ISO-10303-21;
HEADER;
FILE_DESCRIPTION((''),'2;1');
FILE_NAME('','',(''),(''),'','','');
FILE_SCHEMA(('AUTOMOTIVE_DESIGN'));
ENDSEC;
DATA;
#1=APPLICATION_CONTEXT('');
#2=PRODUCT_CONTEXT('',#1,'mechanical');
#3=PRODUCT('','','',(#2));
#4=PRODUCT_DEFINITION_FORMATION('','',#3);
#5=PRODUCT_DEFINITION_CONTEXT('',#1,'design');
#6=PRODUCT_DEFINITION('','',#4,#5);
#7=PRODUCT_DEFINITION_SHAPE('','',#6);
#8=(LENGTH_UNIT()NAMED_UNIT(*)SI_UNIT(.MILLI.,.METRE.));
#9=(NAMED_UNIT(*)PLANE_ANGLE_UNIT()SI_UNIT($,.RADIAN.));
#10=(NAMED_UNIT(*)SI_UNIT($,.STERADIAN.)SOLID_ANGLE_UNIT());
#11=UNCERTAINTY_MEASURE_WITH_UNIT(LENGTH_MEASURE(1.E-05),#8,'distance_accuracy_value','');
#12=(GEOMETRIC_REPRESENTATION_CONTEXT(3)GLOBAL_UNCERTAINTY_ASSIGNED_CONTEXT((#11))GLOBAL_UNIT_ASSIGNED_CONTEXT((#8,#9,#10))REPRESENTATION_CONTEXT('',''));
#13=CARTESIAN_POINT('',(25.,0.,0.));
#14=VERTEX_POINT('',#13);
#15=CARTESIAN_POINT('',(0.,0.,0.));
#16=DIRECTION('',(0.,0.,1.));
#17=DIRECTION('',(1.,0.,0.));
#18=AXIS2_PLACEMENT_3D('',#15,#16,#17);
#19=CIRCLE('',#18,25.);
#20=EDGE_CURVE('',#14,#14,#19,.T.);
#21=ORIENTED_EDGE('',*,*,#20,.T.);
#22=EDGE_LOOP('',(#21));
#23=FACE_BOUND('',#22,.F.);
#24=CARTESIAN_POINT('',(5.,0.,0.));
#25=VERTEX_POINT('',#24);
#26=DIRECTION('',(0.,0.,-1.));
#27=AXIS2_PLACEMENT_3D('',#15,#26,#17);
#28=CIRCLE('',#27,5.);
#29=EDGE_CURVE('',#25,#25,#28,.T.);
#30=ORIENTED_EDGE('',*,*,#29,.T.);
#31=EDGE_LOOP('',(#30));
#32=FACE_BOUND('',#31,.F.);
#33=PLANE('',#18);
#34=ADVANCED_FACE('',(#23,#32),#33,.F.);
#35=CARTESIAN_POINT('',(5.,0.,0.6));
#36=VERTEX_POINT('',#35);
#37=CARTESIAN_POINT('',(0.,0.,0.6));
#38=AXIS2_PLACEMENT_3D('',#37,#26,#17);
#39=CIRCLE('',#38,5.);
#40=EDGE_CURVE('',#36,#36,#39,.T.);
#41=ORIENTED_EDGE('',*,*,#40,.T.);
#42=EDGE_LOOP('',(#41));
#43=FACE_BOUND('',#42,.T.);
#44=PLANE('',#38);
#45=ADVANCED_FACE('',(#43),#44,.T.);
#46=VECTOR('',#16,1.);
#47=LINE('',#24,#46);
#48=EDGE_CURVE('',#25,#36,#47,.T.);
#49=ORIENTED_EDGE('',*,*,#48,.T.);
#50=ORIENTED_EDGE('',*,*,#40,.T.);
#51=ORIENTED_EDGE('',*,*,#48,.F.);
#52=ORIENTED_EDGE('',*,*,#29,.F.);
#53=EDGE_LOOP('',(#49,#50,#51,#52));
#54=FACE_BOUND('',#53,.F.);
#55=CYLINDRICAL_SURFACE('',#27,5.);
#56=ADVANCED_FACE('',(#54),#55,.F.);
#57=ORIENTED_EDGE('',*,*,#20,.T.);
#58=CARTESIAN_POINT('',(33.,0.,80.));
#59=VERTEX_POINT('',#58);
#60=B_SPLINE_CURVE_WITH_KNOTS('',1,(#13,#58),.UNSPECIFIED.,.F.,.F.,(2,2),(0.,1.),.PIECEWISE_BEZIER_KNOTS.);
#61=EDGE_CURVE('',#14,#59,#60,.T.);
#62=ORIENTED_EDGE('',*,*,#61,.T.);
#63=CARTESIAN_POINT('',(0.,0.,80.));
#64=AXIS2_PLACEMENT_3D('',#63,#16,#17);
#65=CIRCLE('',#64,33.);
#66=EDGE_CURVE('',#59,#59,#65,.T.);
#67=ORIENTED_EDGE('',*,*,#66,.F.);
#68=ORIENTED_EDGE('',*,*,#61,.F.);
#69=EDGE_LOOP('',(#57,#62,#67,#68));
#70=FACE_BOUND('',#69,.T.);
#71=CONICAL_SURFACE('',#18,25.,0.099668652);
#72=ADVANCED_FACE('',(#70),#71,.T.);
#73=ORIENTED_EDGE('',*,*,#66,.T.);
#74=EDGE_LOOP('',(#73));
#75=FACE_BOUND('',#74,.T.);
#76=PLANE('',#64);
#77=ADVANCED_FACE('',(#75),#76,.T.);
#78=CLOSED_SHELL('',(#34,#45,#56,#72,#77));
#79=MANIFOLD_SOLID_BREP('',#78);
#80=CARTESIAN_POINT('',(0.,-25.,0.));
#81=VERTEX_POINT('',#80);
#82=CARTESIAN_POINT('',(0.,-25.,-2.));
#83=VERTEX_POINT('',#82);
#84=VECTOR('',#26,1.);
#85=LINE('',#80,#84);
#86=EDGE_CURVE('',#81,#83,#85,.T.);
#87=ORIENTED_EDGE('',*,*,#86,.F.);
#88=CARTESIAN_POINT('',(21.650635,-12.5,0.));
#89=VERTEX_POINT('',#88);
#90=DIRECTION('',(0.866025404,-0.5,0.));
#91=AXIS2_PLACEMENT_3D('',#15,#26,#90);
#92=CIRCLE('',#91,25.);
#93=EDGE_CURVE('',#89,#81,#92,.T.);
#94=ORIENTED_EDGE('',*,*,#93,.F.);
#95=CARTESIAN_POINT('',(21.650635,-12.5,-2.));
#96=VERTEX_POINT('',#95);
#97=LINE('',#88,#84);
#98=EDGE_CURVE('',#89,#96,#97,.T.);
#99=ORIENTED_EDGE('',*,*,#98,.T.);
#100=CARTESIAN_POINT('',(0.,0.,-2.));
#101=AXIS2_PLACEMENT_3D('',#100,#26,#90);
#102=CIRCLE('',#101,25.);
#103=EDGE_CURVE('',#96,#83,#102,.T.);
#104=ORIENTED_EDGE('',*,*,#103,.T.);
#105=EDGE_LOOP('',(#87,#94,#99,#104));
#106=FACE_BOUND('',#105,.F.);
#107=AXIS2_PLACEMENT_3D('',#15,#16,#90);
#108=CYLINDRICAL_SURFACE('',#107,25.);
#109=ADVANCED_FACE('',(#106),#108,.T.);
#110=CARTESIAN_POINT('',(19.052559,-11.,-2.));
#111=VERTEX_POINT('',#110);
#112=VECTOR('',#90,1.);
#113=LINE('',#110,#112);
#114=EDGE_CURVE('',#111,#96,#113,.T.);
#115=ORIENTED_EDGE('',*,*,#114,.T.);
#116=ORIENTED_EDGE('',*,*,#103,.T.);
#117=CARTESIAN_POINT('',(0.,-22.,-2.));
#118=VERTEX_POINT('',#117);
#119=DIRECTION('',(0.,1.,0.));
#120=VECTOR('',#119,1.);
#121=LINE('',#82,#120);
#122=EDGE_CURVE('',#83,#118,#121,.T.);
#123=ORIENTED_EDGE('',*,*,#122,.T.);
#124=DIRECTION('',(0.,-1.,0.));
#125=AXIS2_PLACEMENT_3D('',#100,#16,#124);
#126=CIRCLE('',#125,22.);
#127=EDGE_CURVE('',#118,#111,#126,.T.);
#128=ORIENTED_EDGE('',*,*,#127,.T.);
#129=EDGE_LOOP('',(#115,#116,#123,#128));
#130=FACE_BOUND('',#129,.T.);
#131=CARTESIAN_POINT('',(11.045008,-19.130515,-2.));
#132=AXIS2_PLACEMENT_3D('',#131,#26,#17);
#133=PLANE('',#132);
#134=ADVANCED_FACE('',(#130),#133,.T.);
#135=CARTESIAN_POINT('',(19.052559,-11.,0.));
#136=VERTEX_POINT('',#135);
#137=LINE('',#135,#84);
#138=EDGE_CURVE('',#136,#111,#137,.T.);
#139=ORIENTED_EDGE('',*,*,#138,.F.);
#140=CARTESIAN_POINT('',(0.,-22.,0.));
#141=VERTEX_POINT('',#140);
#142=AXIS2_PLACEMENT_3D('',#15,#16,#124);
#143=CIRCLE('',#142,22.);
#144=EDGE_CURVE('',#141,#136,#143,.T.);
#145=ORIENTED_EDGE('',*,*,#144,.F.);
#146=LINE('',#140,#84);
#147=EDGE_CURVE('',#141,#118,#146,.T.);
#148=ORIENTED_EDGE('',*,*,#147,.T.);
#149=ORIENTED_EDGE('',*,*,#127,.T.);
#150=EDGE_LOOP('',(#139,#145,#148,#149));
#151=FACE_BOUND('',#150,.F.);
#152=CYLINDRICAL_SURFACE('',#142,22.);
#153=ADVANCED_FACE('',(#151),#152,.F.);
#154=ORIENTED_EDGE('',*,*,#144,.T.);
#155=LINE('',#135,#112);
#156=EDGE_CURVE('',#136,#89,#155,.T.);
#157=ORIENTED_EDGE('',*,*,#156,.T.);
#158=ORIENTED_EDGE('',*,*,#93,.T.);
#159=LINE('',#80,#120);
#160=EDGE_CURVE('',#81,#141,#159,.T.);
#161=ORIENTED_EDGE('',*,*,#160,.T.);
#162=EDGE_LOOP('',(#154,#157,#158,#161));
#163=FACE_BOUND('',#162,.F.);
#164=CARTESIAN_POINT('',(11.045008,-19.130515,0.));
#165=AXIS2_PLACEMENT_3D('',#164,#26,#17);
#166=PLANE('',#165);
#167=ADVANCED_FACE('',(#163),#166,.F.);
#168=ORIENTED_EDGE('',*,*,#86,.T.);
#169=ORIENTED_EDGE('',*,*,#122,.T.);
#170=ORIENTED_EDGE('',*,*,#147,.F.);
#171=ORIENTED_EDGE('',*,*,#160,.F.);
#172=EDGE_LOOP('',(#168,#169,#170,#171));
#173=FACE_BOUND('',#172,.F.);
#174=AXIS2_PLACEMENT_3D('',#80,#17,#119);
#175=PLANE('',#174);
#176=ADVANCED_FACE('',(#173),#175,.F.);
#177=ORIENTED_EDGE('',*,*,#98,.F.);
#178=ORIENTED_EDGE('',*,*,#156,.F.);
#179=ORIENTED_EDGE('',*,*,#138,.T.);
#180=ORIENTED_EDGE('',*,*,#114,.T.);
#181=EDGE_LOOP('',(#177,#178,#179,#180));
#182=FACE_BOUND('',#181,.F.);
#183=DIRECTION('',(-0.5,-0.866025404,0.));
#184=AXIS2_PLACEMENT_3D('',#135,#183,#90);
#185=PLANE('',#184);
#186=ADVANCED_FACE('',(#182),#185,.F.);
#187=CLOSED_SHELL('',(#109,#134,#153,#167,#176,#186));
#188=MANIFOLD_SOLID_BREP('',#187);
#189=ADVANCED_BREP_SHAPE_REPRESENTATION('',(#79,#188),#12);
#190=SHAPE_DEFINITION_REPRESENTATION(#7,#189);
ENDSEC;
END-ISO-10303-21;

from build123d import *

# Parameters (mm, degrees)
F2_R     = 25
F3_R     = 33
F5_R     = 5
F6_DEPTH = 0.6
F8_DEPTH = 2


# Not quite as in the source:
# - a feature names something its author has since deleted; it is built from what else it names


with BuildPart() as f4:
    # F2 (on Top) → F4 section 0
    with BuildSketch(Plane.XY):
        Circle(F2_R)
    # F3 (on offset) → F4 section 1
    with BuildSketch(Plane.XY.offset(80)):
        Circle(F3_R)
    loft()

    # F5 (on face) → F6 (cut)
    with BuildSketch(Plane(origin=(0, 0, 0), x_dir=(1, 0, 0), z_dir=(0, 0, -1))):
        Circle(F5_R)
    extrude(amount=-F6_DEPTH, mode=Mode.SUBTRACT)


with BuildPart() as f8:
    # F7 (on face) → F8 (new body)
    with BuildSketch(Plane(origin=(0, 0, 0), x_dir=(1, 0, 0), z_dir=(0, 0, -1))):
        with BuildLine():
            ThreePointArc((21.6506350946, 12.5), (12.5, 21.6506350946), (0, 25))
            Line((0, 25), (0, 22))
            ThreePointArc((0, 22), (11, 19.0525588833), (19.0525588833, 11))
            Line((19.0525588833, 11), (21.6506350946, 12.5))
        make_face()
    extrude(amount=F8_DEPTH)


solid = Compound([f4.part, f8.part])
